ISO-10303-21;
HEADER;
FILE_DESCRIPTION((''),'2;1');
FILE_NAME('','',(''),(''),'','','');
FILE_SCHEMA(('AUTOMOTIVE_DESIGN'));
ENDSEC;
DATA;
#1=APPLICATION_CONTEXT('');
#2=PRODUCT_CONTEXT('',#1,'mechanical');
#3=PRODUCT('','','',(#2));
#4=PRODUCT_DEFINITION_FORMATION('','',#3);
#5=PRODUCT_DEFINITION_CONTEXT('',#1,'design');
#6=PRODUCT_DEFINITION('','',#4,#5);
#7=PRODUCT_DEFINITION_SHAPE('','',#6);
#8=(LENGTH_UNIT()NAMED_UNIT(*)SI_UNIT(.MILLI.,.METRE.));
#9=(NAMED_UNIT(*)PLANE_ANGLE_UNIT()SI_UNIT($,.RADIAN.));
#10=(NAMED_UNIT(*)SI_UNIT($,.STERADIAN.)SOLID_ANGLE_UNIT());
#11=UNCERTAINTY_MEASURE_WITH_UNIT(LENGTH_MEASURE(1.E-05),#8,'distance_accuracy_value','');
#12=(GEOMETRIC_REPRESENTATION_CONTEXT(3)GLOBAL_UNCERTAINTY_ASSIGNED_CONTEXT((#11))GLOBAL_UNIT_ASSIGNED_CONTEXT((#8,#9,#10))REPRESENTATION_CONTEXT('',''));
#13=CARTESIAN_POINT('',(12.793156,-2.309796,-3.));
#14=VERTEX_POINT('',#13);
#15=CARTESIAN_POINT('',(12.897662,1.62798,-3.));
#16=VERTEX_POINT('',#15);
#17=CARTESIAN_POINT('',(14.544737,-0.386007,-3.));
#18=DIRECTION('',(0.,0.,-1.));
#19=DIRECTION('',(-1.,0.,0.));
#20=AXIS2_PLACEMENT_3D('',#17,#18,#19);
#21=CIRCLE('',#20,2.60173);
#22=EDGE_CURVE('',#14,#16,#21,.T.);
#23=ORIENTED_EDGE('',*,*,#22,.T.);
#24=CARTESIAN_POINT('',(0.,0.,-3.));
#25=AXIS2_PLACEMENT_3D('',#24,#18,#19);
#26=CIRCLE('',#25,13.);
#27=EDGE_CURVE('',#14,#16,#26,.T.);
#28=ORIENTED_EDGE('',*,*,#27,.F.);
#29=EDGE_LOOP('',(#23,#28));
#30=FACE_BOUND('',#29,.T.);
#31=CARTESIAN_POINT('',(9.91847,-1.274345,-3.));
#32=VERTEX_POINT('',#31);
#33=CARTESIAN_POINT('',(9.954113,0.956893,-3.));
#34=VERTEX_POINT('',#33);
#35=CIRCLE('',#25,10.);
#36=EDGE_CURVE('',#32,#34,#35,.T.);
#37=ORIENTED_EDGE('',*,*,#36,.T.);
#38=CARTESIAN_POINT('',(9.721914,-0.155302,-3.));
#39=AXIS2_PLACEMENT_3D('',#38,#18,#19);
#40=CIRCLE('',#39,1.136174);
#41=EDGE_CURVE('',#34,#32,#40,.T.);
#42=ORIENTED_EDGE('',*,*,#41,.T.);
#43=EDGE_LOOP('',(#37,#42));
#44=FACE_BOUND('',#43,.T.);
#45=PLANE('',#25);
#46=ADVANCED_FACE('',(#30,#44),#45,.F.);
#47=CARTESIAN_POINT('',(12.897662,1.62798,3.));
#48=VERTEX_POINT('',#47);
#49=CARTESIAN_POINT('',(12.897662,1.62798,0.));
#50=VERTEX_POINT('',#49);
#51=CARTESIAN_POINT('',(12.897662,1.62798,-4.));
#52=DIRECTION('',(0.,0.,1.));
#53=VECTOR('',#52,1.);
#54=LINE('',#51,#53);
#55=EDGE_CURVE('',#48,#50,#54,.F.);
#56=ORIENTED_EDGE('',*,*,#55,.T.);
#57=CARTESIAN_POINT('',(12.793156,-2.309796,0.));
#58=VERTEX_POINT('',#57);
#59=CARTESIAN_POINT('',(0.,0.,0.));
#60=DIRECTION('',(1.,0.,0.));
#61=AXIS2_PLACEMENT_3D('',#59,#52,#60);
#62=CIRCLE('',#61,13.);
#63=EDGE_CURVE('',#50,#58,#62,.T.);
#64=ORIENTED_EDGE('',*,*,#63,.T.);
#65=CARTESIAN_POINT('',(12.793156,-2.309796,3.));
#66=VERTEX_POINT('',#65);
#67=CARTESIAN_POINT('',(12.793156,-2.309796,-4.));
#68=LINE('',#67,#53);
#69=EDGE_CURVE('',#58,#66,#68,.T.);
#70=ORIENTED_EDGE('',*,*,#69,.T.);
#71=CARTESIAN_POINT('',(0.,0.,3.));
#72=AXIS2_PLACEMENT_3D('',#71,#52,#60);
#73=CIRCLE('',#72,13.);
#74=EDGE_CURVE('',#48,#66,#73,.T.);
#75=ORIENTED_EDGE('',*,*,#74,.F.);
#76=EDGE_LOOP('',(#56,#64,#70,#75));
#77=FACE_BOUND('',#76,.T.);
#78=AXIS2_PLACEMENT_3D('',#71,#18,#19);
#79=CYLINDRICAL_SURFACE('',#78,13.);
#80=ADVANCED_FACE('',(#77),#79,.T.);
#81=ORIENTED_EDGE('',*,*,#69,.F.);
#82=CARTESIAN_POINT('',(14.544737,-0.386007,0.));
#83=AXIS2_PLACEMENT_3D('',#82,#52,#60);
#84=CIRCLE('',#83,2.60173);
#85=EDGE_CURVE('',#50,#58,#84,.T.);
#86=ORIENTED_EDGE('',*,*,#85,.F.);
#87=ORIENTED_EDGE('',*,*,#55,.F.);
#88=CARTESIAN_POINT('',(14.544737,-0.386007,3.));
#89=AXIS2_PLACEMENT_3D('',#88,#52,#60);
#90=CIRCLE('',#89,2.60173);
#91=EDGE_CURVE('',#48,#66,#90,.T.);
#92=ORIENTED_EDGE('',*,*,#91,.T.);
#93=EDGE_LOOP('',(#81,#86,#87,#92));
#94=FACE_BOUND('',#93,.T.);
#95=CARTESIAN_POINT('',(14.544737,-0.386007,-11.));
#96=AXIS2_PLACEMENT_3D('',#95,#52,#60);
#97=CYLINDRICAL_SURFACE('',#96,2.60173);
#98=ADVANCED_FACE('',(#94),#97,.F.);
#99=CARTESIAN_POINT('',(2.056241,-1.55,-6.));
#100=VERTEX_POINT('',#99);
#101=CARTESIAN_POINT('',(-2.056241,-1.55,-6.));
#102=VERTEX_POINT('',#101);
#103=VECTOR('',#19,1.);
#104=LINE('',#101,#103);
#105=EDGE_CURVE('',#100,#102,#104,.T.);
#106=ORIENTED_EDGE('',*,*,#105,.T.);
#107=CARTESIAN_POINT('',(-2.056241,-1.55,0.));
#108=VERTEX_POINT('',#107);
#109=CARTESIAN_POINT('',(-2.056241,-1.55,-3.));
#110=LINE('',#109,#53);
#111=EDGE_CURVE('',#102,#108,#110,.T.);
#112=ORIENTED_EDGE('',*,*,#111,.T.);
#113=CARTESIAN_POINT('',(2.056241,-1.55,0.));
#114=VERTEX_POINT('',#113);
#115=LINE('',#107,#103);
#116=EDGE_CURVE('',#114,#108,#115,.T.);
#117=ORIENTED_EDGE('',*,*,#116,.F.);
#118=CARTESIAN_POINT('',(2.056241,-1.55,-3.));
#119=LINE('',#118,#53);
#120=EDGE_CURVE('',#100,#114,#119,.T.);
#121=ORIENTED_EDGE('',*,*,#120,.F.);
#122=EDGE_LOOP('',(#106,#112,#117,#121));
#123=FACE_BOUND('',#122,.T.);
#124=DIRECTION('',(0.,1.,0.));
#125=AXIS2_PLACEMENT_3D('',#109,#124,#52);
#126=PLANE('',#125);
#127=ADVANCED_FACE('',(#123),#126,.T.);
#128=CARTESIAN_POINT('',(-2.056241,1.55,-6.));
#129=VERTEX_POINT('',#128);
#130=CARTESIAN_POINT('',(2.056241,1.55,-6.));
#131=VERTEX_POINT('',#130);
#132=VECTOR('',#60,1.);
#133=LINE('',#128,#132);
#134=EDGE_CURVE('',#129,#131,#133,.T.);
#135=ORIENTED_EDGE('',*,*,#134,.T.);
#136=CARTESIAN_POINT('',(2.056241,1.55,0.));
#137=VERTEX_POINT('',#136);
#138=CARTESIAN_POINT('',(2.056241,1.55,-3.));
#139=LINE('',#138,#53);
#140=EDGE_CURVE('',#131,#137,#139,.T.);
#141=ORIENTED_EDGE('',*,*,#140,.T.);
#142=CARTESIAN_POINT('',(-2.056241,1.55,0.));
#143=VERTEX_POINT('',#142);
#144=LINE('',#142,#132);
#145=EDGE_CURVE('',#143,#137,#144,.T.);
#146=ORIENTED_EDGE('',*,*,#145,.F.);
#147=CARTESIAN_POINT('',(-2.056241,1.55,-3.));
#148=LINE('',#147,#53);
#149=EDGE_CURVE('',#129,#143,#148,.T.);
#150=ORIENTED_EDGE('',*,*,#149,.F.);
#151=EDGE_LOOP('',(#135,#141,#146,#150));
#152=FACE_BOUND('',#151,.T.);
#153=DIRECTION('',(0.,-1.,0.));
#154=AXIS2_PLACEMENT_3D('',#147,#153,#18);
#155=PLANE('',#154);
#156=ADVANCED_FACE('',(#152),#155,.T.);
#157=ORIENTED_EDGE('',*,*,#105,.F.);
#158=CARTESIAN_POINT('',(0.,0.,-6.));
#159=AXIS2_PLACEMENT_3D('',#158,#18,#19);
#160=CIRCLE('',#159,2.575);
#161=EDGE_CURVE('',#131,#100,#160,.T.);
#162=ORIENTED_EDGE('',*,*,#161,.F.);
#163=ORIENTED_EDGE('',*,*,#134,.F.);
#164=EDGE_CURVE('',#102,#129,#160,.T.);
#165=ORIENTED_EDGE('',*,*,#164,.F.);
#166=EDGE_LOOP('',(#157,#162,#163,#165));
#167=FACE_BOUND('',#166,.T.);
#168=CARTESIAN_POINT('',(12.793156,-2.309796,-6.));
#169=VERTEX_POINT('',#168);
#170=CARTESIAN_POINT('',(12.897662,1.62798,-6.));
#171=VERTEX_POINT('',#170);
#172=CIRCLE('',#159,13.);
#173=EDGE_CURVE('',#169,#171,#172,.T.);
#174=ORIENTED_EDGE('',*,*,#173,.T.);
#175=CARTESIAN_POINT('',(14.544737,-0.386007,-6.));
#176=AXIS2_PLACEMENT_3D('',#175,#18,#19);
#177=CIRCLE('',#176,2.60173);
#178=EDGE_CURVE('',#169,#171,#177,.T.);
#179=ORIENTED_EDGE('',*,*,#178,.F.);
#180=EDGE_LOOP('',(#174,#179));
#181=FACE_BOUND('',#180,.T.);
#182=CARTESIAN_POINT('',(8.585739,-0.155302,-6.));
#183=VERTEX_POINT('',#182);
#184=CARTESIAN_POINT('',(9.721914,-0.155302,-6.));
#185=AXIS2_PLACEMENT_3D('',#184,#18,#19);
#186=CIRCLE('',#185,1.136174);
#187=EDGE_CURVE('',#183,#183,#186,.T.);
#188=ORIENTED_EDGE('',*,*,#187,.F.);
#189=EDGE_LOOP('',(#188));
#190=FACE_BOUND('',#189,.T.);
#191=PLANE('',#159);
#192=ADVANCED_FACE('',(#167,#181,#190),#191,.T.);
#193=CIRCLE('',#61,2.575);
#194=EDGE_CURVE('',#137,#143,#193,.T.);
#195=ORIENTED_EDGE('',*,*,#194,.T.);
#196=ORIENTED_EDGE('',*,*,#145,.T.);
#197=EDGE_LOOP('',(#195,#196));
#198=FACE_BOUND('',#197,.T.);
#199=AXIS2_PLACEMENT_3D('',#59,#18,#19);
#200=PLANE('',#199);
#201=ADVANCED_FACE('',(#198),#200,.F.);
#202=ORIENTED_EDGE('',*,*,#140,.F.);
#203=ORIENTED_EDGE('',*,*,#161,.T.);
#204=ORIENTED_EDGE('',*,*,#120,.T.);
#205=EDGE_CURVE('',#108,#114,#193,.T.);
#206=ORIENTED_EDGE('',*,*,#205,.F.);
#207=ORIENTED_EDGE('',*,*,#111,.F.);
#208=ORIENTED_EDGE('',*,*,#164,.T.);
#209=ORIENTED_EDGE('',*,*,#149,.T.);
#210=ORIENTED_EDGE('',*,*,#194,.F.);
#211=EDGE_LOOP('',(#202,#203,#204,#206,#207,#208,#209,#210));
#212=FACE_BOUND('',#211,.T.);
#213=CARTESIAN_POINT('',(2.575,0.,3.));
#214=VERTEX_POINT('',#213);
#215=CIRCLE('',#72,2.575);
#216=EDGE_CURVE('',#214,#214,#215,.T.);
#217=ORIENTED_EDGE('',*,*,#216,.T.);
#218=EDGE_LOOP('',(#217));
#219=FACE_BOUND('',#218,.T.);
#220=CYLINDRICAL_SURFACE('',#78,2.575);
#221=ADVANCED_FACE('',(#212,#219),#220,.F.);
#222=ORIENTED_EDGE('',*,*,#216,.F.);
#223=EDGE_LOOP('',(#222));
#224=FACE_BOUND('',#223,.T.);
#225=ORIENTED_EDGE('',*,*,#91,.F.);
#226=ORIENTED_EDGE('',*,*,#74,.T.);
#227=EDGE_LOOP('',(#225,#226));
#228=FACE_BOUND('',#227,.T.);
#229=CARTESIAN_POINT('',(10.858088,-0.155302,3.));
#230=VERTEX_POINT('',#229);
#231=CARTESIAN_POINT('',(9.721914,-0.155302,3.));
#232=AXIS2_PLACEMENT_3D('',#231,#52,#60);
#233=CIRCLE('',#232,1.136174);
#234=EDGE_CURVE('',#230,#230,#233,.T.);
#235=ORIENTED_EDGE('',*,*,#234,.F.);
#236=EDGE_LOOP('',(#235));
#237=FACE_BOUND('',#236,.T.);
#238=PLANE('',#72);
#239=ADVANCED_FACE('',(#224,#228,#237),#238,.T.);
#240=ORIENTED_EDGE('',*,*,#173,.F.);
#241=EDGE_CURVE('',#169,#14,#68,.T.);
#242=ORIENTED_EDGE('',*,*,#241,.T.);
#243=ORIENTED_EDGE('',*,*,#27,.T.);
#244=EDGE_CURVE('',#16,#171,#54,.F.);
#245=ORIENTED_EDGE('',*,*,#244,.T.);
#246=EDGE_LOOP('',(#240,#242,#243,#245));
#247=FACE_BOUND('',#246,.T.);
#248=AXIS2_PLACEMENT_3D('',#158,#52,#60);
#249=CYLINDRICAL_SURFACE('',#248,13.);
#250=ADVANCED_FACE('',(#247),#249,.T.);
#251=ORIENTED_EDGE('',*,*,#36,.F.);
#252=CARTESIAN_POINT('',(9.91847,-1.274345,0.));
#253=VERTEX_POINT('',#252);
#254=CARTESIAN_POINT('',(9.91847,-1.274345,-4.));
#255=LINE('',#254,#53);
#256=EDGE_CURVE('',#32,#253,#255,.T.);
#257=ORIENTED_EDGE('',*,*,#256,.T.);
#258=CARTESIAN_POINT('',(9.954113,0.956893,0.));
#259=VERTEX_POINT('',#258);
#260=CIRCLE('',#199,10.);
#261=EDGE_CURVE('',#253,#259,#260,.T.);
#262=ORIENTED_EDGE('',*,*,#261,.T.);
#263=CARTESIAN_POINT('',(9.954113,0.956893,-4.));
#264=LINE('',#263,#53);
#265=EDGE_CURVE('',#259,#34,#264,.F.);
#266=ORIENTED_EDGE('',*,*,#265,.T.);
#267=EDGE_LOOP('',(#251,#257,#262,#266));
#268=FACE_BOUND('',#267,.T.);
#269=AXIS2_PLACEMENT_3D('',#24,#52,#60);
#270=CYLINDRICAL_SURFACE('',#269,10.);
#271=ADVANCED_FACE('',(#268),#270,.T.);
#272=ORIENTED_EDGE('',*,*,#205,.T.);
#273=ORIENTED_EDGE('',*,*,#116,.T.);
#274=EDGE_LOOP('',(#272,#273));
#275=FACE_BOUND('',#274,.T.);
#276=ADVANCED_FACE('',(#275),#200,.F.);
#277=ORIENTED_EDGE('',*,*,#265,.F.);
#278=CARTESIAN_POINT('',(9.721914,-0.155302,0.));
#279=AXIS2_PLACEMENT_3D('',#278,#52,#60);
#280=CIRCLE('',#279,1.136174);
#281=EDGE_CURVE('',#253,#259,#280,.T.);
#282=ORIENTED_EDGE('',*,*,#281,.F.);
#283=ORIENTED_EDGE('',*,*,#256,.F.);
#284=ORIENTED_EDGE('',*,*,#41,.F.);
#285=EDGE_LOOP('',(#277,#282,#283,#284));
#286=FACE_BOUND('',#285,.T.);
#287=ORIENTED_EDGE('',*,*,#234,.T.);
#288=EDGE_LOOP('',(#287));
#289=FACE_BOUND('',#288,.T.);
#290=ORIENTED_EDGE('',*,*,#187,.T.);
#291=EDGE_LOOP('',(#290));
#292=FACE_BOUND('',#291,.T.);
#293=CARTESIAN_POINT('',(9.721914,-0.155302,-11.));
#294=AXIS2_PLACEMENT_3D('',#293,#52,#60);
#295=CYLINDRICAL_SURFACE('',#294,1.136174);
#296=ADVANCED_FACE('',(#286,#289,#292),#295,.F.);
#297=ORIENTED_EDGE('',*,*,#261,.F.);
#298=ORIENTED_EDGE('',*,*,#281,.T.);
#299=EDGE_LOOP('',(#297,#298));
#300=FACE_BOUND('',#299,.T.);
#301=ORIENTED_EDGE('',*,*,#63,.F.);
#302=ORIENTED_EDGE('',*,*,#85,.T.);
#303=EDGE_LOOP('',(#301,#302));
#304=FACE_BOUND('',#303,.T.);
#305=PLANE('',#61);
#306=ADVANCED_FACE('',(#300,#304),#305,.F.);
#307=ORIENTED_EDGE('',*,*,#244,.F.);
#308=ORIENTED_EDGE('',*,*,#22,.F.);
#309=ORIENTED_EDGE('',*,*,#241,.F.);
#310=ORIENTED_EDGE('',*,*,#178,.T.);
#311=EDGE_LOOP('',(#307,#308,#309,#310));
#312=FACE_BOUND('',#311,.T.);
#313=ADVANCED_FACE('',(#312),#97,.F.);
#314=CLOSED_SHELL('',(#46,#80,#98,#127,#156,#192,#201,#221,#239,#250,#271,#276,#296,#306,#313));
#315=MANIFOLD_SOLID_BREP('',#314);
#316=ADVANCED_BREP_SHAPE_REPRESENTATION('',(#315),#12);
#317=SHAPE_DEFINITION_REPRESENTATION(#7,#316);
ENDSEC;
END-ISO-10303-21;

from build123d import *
from build123d.topology import SkipClean

# Parameters (mm, degrees)
SKETCH1_R               = 13
SKETCH1_R_2             = 10
SKETCH1_R_3             = 2.575
BOSS_EXTRUDE4_DEPTH     = 3
BOSS_EXTRUDE5_START     = 3
SKETCH5_R               = 10
BOSS_EXTRUDE5_DEPTH     = 3
BOSS_EXTRUDE6_OUTLINE_R = 13
BOSS_EXTRUDE6_DEPTH     = 3
SKETCH8_R               = 1.136174382
SKETCH8_R_2             = 2.601730121
CUT_EXTRUDE2_DEPTH      = 14


# Read off the part's stored shape, not the designer's step: Boss-Extrude6
with BuildPart() as part:
    # Sketch1 → Boss-Extrude4 (new body)
    # profile 1 of 2: a face of its own
    with BuildSketch(Plane.XY):
        Circle(SKETCH1_R)
        Circle(SKETCH1_R_2, mode=Mode.SUBTRACT)
    # profile 2 of 2: a face of its own
    with BuildSketch(Plane.XY):
        Circle(SKETCH1_R_2)
        Circle(SKETCH1_R_3, mode=Mode.SUBTRACT)
    extrude(amount=BOSS_EXTRUDE4_DEPTH)

    # Sketch5 → Boss-Extrude5 (add)
    with SkipClean():  # the faces are left unmerged after this step: merging them gives an invalid solid
        with BuildSketch(Plane(origin=(0, 0, 0), x_dir=(-1, 0, 0), z_dir=(0, 0, -1)).offset(BOSS_EXTRUDE5_START)):
            Circle(SKETCH5_R)
            with BuildLine():
                Line((2.056240501, 1.55), (-2.056240501, 1.55))
                ThreePointArc((-2.056240501, 1.55), (-2.575, 0), (-2.056240501, -1.55))
                Line((-2.056240501, -1.55), (2.056240501, -1.55))
                ThreePointArc((2.056240501, -1.55), (2.575, 0), (2.056240501, 1.55))
            make_face(mode=Mode.SUBTRACT)
        extrude(amount=-BOSS_EXTRUDE5_DEPTH)

    # Boss-Extrude6 outline → Boss-Extrude6 (add)
    with SkipClean():  # the faces are left unmerged after this step: merging them gives an invalid solid
        with BuildSketch(Plane(origin=(0, 0, -3), x_dir=(-1, 0, 0), z_dir=(0, 0, -1))):
            Circle(BOSS_EXTRUDE6_OUTLINE_R)
            with BuildLine():
                Line((-2.056240501, 1.55), (2.056240501, 1.55))
                ThreePointArc((2.056240501, 1.55), (2.575, 0), (2.056240501, -1.55))
                Line((2.056240501, -1.55), (-2.056240501, -1.55))
                ThreePointArc((-2.056240501, -1.55), (-2.575, 0), (-2.056240501, 1.55))
            make_face(mode=Mode.SUBTRACT)
        extrude(amount=BOSS_EXTRUDE6_DEPTH)

    # Sketch8 → Cut-Extrude2 (cut)
    with SkipClean():  # the faces are left unmerged after this step: merging them gives an invalid solid
        with BuildSketch(Plane.XY.offset(3)):
            with Locations((9.721913819, -0.155301554)):
                Circle(SKETCH8_R)
            with Locations((14.544737257, -0.386006821)):
                Circle(SKETCH8_R_2)
        extrude(amount=-CUT_EXTRUDE2_DEPTH, mode=Mode.SUBTRACT)


solid = part.part
